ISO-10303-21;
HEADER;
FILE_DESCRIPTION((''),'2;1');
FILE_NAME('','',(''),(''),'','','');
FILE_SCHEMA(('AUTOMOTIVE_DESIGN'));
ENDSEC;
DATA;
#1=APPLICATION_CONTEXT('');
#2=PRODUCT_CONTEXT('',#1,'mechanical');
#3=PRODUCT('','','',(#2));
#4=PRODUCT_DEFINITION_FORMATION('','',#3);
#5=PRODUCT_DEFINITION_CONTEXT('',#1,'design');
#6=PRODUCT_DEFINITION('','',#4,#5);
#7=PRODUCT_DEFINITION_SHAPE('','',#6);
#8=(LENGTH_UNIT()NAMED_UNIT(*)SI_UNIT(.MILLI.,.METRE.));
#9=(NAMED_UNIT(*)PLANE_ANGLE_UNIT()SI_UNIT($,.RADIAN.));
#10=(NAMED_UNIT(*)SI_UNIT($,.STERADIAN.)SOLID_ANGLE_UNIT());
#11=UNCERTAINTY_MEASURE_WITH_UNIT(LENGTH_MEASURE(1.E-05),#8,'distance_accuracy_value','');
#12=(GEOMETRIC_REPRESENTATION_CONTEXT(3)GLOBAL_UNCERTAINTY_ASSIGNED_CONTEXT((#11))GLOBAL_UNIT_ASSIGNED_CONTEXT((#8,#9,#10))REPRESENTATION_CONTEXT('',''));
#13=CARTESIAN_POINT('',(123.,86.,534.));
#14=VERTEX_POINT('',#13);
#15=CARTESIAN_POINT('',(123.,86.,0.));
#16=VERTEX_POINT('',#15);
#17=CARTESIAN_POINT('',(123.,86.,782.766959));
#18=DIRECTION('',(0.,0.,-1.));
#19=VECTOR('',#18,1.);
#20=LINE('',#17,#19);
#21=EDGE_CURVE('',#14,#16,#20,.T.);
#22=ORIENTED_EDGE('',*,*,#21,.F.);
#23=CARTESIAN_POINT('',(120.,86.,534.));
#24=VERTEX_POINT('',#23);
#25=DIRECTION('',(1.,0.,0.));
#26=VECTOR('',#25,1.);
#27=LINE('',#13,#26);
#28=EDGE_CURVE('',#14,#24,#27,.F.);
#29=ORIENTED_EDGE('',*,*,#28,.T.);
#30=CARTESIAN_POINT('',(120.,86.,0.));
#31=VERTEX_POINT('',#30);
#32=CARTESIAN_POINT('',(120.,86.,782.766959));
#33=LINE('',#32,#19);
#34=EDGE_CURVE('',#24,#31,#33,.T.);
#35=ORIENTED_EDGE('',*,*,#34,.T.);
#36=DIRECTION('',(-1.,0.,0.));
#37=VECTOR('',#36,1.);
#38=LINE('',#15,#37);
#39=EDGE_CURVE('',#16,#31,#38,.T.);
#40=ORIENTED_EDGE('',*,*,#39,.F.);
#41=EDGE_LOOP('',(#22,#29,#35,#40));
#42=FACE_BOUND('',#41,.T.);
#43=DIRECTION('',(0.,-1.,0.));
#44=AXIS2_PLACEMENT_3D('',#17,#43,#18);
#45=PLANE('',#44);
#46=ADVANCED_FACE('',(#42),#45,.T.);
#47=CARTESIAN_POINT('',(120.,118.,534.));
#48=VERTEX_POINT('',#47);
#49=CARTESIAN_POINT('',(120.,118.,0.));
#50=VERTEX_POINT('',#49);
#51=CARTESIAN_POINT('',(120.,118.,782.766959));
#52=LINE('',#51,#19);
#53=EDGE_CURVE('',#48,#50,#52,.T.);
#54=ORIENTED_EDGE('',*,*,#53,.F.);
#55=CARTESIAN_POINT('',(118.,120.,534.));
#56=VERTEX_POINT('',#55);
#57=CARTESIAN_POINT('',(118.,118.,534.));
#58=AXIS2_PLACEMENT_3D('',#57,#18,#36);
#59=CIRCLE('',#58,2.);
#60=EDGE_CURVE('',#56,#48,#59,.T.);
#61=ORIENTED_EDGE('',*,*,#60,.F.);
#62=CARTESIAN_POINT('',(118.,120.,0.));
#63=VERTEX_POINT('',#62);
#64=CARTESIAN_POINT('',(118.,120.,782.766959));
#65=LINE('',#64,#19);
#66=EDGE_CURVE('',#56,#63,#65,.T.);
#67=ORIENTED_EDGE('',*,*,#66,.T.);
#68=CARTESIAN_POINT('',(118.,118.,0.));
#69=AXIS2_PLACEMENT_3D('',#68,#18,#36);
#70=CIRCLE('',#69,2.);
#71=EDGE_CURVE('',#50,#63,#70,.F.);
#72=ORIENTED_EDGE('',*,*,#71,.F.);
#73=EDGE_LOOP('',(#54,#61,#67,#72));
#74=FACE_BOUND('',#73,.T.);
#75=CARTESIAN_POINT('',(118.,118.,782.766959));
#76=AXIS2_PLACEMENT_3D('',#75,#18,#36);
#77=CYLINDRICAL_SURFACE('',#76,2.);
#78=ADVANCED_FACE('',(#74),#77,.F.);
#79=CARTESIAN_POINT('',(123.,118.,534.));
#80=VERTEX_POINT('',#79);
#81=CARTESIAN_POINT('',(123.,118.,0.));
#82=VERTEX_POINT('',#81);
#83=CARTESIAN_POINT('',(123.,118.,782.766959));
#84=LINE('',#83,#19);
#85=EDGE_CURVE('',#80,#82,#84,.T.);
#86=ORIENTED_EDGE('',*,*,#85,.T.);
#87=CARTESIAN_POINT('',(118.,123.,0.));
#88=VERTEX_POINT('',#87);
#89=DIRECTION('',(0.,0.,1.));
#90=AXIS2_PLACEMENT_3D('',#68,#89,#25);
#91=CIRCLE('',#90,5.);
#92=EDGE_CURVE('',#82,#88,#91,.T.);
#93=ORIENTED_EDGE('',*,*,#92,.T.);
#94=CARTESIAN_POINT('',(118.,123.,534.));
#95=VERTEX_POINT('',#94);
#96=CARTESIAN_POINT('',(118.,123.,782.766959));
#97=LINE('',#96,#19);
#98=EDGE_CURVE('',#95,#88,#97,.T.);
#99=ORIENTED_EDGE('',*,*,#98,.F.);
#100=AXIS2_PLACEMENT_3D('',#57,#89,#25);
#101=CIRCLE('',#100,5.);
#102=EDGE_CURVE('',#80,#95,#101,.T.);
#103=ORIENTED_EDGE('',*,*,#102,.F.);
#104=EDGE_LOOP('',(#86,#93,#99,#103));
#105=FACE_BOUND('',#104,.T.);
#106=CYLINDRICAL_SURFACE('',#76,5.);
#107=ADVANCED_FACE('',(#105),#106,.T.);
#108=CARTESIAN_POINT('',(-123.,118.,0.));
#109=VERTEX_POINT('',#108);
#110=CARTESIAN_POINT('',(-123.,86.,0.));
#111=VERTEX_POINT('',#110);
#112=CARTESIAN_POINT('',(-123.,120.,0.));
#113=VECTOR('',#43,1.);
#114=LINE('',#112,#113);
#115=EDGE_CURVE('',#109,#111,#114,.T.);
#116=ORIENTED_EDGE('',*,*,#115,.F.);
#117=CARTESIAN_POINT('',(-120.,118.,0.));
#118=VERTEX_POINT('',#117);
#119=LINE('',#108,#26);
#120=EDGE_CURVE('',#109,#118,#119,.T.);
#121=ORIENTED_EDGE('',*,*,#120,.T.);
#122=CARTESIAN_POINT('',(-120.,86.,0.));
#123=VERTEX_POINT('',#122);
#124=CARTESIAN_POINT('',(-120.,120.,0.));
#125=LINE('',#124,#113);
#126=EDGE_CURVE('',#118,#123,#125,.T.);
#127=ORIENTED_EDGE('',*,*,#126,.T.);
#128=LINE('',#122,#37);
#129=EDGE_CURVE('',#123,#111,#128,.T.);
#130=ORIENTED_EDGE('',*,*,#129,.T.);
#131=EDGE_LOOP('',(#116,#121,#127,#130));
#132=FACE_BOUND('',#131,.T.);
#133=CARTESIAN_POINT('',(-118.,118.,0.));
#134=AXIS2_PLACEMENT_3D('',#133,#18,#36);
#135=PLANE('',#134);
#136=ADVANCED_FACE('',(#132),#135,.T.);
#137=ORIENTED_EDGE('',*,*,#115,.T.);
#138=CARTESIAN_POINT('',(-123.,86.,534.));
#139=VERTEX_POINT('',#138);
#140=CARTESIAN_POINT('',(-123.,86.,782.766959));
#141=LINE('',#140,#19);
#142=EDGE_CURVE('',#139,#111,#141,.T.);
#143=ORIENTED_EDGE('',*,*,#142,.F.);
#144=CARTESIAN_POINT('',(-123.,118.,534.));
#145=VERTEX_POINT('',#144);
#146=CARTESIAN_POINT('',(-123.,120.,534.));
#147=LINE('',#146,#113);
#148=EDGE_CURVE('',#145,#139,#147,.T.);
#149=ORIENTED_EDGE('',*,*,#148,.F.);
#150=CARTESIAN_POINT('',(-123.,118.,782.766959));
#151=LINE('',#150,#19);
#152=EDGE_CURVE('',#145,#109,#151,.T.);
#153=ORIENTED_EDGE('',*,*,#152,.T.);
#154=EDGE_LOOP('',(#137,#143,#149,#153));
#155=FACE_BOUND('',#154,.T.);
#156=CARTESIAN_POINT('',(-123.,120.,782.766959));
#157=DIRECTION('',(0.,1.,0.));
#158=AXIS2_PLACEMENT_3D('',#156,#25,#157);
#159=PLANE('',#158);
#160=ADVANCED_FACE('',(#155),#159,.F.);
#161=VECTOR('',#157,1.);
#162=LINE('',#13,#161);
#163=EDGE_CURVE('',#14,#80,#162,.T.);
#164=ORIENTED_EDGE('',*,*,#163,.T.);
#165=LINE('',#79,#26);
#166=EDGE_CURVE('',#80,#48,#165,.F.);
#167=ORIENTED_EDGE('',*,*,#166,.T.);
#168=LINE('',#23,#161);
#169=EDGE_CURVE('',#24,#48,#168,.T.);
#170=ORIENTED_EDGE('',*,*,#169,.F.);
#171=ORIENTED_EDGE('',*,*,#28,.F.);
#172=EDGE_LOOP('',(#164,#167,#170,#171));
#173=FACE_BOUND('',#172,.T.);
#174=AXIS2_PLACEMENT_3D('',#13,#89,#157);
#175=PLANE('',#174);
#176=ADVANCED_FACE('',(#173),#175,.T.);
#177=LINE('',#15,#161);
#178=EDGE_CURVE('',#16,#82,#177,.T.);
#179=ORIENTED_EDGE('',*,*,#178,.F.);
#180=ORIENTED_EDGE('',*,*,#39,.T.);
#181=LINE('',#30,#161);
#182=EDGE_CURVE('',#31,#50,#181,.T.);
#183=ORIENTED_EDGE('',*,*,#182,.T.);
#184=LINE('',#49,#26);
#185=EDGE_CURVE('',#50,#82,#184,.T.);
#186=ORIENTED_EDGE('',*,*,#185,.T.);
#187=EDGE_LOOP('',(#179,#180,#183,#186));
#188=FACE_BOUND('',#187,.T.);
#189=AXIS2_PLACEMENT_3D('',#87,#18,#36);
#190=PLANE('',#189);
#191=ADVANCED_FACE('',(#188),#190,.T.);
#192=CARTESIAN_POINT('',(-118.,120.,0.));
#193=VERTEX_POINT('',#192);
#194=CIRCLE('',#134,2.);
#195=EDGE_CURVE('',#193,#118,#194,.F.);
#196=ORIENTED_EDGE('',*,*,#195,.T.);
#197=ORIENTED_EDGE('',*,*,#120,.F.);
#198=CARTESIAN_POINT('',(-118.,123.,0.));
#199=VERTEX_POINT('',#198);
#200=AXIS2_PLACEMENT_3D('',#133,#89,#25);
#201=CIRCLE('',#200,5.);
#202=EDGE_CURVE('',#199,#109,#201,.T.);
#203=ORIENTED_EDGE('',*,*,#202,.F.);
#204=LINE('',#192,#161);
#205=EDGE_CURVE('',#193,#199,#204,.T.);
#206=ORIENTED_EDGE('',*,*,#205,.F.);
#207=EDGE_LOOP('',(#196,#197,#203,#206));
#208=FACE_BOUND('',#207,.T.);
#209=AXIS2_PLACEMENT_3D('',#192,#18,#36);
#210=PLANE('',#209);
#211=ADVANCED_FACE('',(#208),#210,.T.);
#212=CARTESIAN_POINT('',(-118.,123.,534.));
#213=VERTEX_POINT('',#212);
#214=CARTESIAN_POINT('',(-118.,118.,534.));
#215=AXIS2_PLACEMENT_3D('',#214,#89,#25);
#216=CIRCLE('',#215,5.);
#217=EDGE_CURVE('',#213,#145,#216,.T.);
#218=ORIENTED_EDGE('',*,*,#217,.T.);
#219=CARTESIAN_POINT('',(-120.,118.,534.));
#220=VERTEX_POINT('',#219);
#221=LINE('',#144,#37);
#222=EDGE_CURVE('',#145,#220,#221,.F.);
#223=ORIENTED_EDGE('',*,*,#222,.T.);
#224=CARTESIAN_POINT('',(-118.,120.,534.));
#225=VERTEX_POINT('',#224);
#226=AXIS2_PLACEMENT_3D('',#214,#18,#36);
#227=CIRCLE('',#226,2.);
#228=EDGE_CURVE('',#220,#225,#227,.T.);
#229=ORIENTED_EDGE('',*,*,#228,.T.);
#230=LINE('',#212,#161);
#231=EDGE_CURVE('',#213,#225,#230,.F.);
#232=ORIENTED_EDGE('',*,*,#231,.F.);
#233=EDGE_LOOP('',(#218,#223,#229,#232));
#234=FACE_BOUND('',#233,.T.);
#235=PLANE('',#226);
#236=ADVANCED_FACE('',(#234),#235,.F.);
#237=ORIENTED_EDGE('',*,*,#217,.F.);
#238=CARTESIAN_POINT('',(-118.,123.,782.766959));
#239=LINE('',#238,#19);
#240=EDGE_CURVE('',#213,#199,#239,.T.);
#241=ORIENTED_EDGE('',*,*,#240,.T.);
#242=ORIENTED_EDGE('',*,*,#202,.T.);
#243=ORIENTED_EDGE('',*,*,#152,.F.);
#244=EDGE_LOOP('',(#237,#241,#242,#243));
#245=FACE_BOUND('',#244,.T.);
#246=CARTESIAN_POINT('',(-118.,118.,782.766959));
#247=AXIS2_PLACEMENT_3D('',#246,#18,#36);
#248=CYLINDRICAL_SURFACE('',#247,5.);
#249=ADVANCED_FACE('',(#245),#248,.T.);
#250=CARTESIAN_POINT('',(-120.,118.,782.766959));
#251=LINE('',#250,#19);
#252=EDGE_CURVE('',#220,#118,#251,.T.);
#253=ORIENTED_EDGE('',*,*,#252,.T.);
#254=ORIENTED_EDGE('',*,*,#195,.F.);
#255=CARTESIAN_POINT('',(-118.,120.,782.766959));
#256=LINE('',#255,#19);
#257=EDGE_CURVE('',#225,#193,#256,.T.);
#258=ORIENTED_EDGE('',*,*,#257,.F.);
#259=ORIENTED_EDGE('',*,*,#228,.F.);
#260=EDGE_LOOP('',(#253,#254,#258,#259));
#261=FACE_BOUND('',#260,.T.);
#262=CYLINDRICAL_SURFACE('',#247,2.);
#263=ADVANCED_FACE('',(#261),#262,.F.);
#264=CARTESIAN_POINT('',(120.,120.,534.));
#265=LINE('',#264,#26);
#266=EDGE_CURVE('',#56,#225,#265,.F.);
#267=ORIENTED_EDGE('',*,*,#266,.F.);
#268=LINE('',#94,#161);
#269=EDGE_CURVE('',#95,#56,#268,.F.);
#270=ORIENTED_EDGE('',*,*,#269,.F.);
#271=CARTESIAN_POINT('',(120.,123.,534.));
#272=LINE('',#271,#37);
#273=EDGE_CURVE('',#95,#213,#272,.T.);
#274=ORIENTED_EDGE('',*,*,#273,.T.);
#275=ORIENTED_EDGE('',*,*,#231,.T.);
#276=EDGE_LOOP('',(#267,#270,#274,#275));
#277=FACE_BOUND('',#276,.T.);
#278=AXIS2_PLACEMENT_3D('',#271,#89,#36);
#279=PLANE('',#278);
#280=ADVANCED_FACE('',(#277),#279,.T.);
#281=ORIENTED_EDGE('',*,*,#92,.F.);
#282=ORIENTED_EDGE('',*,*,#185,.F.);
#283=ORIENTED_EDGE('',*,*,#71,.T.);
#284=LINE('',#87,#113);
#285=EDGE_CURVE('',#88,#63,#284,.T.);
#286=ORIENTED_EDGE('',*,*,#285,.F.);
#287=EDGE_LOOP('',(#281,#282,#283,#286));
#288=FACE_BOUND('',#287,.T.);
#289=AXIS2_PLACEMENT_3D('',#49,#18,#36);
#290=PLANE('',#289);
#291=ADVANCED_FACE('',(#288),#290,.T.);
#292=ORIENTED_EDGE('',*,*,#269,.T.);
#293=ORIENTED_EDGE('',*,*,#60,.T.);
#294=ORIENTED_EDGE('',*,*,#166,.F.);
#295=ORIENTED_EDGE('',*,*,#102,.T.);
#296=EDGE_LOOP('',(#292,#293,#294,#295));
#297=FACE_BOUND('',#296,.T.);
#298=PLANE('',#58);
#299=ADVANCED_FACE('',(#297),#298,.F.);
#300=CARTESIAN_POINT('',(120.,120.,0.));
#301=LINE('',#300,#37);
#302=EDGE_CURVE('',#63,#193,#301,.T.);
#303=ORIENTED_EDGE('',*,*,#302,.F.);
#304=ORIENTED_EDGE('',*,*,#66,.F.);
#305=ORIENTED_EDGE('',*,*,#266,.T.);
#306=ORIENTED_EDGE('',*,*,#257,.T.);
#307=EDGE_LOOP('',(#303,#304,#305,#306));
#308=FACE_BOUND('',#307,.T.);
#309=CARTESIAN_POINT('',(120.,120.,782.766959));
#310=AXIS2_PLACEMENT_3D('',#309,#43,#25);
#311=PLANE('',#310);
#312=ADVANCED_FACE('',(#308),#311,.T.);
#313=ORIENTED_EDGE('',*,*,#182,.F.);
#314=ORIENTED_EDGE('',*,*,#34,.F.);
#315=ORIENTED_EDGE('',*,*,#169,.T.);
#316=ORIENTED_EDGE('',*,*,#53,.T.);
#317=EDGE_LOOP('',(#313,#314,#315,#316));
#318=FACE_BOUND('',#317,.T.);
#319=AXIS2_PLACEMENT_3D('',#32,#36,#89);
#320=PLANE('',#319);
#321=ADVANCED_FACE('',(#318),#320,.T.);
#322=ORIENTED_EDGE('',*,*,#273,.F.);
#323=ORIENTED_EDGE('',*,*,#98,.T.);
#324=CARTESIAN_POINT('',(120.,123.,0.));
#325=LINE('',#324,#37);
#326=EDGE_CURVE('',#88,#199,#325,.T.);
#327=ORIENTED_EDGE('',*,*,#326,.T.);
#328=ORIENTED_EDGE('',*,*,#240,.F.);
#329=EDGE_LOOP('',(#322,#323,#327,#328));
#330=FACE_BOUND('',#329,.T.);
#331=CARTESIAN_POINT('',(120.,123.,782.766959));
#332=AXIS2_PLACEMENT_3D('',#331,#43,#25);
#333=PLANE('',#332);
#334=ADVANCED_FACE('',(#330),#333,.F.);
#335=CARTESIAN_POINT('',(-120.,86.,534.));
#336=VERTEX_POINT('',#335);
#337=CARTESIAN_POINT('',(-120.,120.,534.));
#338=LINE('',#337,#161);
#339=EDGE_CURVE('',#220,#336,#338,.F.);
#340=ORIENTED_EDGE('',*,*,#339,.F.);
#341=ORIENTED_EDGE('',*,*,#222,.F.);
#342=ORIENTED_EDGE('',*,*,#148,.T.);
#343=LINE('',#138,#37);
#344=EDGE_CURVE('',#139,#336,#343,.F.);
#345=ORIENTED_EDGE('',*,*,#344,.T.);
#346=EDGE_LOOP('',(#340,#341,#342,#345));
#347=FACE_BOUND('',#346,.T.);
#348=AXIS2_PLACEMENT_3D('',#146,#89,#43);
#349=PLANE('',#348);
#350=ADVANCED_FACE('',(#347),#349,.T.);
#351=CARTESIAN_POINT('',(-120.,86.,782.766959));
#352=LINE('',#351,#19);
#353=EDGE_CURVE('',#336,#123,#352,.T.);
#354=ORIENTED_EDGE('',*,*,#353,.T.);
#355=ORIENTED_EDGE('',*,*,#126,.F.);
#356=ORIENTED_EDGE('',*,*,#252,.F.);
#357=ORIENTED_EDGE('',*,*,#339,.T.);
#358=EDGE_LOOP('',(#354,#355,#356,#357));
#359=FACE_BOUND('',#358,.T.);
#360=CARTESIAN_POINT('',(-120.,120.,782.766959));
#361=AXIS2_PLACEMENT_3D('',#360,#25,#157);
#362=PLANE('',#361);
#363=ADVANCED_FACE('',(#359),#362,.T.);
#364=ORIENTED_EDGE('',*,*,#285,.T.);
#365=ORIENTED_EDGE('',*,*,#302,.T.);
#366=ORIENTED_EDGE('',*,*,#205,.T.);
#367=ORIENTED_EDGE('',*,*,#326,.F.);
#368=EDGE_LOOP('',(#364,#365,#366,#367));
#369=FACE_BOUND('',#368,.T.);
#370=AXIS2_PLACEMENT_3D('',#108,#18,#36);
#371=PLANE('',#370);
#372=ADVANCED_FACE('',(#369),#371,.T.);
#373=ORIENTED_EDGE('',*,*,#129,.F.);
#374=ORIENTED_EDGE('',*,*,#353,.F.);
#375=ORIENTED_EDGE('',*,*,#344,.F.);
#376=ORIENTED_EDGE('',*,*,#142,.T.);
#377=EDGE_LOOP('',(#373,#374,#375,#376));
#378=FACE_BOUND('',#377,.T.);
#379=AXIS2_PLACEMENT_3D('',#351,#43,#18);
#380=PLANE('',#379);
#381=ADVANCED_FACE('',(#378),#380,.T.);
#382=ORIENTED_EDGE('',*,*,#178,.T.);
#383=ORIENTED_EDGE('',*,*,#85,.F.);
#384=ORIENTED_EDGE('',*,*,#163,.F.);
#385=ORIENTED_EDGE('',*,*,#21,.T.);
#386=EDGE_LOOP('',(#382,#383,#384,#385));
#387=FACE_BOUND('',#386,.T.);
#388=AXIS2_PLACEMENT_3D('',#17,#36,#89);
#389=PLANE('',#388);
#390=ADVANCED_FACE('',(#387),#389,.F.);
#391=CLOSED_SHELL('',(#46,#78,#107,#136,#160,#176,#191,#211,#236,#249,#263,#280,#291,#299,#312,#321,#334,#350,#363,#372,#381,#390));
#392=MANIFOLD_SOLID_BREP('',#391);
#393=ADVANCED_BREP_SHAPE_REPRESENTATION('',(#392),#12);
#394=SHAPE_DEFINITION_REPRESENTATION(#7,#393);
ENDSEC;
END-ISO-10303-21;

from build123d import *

# Parameters (mm, degrees)
SM_BASE_FLANGE_1_DEPTH = 534


# Sheet-metal steps are written as plain solids
with BuildPart() as part:
    # Sketch 1 → Базовая кромка1 (new body)
    with BuildSketch(Plane.XY):
        with BuildLine():
            Line((120, 86), (120, 118))
            ThreePointArc((120, 118), (119.414213562, 119.414213562), (118, 120))
            Line((118, 120), (-118, 120))
            ThreePointArc((-118, 120), (-119.414213562, 119.414213562), (-120, 118))
            Line((-120, 118), (-120, 86))
            Line((-120, 86), (-123, 86))
            Line((-123, 86), (-123, 118))
            ThreePointArc((-123, 118), (-121.535533906, 121.535533906), (-118, 123))
            Line((-118, 123), (118, 123))
            ThreePointArc((118, 123), (121.535533906, 121.535533906), (123, 118))
            Line((123, 118), (123, 86))
            Line((123, 86), (120, 86))
        make_face()
    extrude(amount=SM_BASE_FLANGE_1_DEPTH)


solid = part.part
